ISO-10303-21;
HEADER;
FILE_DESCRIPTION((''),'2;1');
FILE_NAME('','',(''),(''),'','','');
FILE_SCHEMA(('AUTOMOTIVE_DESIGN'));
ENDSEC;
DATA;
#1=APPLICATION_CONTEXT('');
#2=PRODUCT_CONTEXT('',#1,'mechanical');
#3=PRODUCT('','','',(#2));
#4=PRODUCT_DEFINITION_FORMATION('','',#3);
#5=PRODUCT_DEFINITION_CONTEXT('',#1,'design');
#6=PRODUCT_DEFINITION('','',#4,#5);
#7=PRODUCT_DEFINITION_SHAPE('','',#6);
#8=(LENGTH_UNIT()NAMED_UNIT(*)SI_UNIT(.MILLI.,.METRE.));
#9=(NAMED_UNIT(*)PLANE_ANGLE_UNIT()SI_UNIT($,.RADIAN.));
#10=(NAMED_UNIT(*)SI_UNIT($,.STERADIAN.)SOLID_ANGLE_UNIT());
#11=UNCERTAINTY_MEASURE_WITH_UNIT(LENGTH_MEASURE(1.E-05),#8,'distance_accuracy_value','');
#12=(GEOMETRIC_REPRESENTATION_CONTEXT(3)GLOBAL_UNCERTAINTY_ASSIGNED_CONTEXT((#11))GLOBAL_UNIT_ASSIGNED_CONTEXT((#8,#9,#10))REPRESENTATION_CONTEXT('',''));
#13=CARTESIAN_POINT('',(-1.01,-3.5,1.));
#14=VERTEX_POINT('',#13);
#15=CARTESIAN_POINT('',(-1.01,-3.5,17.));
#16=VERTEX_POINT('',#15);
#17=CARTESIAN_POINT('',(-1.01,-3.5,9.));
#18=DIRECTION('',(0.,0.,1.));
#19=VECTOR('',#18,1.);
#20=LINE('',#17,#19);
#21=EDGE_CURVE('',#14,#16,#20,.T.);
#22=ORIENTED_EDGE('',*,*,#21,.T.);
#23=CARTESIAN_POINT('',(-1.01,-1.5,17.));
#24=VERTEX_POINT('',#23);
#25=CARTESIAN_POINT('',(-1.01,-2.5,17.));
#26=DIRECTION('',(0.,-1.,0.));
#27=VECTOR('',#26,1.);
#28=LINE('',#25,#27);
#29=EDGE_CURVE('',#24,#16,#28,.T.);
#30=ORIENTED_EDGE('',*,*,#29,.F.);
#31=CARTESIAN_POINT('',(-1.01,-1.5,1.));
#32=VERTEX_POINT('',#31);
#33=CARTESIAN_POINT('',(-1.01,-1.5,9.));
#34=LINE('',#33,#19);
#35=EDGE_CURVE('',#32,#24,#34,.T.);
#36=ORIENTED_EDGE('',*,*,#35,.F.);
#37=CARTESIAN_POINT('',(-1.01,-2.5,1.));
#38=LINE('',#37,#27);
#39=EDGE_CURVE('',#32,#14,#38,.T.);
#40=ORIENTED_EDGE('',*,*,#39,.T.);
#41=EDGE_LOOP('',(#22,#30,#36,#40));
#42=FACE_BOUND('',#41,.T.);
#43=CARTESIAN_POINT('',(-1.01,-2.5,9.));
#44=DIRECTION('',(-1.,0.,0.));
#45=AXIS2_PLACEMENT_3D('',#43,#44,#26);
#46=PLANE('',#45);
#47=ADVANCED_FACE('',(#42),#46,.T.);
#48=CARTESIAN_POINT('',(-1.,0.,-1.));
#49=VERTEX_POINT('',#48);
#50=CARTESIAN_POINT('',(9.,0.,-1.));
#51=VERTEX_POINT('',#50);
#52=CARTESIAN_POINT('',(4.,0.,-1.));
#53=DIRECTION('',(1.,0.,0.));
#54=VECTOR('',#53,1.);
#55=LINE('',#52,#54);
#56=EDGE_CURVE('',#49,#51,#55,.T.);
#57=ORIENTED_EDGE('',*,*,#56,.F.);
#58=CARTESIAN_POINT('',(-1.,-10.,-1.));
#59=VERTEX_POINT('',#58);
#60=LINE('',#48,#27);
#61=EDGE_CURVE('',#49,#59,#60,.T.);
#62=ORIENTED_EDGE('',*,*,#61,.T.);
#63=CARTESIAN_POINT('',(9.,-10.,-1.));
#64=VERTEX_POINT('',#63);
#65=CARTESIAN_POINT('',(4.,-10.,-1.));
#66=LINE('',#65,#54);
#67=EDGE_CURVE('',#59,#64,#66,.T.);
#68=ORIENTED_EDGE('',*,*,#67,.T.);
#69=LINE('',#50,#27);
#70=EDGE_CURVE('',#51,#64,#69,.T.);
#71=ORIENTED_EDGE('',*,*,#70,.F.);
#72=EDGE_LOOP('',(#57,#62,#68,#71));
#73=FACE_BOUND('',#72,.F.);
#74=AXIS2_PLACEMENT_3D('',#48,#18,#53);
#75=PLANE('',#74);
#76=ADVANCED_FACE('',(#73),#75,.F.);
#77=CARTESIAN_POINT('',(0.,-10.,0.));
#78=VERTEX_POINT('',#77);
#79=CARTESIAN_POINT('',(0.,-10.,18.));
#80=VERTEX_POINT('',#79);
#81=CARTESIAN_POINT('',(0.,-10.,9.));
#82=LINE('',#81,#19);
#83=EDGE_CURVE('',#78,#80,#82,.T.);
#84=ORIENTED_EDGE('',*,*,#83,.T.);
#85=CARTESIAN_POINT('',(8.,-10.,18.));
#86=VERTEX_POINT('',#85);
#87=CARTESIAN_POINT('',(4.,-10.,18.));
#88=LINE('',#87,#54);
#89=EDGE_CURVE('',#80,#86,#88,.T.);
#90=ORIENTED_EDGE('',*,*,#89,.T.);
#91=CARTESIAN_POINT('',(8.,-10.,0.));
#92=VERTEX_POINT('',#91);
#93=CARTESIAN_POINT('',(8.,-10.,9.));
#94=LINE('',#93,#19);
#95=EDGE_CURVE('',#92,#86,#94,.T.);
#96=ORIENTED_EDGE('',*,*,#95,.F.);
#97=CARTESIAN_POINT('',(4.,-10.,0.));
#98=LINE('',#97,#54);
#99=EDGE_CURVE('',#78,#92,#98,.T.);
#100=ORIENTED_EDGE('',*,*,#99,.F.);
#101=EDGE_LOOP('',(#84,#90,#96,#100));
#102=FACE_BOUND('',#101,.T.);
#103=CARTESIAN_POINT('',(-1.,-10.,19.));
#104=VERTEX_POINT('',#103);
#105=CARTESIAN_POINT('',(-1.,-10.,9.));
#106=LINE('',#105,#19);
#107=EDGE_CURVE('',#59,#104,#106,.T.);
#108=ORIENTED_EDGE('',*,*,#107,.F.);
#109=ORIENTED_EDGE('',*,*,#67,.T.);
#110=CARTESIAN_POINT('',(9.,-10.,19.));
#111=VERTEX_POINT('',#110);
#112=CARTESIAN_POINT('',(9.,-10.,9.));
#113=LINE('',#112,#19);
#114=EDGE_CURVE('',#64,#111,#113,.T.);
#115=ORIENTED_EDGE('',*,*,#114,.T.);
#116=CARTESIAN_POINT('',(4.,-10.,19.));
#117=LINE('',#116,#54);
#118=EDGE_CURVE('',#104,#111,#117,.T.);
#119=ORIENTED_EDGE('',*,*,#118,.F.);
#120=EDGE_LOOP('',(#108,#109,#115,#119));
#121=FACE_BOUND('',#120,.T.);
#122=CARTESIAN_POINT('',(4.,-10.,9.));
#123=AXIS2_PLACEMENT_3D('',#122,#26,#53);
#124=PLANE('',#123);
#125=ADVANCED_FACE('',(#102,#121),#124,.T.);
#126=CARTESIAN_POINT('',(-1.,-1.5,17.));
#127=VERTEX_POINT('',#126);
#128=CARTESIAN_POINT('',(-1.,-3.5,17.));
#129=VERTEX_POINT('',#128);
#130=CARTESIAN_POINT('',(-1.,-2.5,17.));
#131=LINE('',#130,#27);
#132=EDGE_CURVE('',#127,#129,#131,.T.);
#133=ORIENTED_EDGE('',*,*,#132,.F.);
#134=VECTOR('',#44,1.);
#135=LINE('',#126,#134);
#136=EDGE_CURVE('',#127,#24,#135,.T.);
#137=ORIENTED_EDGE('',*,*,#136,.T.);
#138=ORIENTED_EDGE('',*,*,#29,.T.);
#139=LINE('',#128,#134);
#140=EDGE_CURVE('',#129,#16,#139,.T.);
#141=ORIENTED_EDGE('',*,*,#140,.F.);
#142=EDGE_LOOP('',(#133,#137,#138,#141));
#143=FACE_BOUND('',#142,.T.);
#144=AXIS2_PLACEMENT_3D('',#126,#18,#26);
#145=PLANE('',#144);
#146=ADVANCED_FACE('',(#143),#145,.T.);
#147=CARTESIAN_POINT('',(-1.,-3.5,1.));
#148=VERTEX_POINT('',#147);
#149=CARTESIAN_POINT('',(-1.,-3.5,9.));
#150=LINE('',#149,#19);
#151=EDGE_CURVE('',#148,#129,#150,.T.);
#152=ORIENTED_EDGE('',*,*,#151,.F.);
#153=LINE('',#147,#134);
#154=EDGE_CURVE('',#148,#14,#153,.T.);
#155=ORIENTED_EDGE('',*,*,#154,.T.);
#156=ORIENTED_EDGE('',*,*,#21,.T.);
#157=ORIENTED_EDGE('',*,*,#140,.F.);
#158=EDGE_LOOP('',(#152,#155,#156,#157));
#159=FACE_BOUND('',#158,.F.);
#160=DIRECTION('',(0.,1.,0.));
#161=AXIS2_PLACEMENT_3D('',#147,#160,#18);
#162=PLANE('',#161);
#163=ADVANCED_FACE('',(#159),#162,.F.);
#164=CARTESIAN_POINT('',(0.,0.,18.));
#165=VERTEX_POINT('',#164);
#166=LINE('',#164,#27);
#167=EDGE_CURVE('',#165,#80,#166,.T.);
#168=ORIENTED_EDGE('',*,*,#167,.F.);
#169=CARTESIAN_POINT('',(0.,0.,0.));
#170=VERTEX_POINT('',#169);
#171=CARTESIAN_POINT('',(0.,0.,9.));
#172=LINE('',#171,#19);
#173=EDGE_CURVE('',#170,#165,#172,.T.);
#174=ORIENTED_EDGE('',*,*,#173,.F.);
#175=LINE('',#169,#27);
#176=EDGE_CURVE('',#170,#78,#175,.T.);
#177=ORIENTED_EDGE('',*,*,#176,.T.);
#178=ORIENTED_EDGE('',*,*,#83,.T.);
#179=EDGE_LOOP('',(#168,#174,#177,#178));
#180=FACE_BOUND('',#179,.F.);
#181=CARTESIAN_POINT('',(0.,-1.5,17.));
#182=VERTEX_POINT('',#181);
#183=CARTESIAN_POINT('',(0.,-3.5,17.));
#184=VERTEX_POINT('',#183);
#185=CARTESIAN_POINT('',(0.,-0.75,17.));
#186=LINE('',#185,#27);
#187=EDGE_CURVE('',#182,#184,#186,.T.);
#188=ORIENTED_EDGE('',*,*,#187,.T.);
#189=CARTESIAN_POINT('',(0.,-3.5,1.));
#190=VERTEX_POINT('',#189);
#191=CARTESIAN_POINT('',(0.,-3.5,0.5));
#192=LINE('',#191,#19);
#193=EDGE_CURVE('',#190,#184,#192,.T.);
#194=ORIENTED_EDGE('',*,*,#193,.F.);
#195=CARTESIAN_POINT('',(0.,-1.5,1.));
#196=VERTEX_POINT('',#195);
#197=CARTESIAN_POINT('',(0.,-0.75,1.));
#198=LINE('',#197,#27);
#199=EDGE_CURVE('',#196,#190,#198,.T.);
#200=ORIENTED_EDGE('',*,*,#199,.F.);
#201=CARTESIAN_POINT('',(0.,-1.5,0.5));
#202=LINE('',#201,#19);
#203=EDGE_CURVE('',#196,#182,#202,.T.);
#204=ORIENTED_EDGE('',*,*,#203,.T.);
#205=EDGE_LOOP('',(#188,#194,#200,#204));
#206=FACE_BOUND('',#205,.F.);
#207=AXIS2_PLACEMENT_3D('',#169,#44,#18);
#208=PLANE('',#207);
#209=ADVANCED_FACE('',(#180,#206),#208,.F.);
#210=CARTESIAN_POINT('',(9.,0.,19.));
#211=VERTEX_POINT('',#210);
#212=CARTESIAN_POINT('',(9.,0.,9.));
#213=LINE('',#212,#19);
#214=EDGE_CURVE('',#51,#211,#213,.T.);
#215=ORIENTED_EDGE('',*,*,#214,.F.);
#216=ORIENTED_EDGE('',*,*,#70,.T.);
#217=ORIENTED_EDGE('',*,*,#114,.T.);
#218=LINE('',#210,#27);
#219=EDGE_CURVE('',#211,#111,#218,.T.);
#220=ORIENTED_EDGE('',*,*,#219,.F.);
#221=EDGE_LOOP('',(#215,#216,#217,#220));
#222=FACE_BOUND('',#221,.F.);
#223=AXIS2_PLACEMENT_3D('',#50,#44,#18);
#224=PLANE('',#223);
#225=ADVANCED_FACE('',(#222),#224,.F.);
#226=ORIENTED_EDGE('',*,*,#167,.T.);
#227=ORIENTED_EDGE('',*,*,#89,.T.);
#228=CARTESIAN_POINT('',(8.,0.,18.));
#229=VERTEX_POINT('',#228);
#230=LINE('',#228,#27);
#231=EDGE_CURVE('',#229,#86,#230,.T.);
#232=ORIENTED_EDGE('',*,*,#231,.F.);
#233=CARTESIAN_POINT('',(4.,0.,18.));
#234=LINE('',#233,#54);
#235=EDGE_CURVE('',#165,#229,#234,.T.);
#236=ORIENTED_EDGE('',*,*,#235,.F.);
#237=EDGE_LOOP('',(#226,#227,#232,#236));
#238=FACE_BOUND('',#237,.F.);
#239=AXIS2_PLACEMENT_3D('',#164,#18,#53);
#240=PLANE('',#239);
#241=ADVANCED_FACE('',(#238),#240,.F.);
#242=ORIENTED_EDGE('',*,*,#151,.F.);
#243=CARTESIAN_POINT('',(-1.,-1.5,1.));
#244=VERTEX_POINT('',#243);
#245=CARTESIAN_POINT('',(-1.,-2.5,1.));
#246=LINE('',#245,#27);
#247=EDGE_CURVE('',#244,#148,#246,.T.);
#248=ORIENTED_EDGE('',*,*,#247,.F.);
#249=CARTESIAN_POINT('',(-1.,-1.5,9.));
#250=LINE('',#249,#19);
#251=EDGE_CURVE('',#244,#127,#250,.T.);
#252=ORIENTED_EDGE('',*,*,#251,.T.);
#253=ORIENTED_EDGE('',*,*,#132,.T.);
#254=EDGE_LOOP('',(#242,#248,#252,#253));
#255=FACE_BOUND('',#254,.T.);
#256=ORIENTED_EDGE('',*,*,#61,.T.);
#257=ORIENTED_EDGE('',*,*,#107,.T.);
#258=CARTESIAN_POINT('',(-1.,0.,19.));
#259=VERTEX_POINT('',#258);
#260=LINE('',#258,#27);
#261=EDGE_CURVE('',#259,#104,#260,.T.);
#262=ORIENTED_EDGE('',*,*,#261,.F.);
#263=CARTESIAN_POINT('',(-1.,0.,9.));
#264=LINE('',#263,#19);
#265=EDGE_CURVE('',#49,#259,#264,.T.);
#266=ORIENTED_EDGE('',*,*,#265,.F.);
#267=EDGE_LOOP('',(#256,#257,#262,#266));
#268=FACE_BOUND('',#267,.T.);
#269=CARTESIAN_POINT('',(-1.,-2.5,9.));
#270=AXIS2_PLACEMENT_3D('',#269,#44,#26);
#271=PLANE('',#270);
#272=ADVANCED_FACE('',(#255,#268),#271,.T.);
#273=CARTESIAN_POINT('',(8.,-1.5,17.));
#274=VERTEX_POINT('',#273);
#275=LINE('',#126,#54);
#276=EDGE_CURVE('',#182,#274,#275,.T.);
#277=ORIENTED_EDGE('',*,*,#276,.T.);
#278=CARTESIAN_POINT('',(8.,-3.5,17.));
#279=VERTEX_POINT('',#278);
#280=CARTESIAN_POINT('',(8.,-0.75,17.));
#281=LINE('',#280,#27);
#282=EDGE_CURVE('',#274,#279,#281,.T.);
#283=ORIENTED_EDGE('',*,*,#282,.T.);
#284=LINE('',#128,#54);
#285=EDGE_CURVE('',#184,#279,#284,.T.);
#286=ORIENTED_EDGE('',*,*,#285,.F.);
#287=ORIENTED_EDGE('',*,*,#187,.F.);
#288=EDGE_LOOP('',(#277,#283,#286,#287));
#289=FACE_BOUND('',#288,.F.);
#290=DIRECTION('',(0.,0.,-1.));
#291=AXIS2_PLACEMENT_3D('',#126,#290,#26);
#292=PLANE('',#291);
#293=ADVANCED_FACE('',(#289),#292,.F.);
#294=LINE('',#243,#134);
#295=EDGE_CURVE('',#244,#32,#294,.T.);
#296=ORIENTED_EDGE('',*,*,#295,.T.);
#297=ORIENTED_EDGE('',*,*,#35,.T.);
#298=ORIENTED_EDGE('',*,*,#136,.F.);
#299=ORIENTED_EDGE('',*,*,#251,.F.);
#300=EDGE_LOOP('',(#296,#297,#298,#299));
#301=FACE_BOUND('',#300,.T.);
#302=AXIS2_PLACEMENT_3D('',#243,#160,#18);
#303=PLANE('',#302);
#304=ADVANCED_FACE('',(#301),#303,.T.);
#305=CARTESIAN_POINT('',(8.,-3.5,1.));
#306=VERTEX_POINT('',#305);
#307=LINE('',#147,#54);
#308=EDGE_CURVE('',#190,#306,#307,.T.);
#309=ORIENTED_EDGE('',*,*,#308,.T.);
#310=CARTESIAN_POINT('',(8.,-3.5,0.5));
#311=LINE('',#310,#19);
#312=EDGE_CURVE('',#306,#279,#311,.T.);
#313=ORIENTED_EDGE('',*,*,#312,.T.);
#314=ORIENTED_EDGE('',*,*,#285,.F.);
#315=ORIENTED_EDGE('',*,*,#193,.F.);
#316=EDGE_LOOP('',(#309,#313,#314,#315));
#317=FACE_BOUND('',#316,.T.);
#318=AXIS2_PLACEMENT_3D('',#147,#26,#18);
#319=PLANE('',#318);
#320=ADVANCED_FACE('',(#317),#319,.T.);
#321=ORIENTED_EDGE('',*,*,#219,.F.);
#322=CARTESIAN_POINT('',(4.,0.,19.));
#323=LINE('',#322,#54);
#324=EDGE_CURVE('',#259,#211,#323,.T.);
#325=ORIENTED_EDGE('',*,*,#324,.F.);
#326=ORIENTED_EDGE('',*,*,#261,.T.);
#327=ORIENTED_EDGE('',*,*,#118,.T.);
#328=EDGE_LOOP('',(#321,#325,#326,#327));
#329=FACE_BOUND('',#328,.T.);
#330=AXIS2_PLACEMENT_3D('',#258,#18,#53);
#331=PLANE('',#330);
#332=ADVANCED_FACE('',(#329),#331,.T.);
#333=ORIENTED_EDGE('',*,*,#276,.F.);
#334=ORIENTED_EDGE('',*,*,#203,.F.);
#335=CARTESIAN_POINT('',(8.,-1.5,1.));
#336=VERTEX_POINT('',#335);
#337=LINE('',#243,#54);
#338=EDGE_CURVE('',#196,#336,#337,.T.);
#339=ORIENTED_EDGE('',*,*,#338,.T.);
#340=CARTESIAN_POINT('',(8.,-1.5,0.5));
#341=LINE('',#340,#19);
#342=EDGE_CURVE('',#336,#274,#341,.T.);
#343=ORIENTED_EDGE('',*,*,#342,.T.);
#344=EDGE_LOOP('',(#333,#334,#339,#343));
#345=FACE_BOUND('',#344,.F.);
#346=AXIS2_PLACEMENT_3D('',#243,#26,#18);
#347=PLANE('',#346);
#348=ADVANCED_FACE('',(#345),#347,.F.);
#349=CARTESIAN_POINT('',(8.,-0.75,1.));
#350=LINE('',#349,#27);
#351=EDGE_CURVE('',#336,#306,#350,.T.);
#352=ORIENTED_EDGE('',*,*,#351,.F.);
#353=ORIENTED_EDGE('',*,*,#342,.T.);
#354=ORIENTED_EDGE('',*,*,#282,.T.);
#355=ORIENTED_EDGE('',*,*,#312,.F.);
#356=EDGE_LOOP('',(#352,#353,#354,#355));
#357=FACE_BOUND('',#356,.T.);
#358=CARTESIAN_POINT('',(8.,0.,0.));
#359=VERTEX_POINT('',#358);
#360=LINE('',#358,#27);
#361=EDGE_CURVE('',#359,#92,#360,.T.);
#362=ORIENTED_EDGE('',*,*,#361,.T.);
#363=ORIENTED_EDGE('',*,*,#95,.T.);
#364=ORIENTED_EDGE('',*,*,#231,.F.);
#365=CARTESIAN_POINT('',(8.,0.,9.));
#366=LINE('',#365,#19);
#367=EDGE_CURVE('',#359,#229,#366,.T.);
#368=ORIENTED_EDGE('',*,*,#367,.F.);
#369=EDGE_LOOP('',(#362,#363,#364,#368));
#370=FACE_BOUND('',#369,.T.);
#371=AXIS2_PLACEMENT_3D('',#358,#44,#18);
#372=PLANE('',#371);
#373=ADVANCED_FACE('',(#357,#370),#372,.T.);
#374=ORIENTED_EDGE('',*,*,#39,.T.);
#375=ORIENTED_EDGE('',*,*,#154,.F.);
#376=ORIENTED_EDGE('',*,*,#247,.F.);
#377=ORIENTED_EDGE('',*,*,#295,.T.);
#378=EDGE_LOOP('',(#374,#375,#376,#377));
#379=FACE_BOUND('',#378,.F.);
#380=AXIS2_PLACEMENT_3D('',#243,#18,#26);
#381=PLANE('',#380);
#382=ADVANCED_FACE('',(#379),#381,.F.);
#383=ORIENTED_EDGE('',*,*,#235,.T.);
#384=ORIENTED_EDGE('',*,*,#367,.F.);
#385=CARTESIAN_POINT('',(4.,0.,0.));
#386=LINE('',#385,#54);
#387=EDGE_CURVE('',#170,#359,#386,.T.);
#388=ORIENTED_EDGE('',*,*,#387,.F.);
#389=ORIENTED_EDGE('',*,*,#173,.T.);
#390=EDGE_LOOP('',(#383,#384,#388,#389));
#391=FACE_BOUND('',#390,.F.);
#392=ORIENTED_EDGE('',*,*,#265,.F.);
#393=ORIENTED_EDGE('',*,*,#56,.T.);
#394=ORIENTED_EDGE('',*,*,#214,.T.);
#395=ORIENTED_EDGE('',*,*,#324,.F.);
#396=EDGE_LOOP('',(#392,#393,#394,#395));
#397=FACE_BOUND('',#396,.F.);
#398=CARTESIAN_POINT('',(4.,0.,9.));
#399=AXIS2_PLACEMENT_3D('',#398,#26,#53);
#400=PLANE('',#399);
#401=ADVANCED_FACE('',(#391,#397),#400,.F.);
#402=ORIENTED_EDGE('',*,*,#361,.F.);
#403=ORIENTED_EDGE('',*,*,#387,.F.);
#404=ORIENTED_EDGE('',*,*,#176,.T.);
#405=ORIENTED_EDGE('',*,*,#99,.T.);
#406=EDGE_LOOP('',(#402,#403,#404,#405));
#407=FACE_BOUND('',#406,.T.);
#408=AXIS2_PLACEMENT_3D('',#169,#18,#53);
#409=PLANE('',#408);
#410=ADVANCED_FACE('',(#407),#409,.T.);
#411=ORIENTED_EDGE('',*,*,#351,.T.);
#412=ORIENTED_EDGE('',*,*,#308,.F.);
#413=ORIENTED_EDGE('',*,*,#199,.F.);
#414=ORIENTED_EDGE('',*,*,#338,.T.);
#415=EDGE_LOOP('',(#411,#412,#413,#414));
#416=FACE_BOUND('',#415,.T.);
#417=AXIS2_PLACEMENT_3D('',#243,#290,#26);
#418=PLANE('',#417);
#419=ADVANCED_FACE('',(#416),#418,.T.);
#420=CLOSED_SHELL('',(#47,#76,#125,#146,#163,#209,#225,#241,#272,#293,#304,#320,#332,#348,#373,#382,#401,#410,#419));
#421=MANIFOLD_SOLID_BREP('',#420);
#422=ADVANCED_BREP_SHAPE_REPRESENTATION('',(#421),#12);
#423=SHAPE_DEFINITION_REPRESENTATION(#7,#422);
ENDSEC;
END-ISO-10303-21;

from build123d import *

# Parameters (mm, degrees)
F0_W          = 10
F0_H          = 20
F0_W_2        = 8
F0_H_2        = 18
F1_DEPTH      = 10
F2_W          = 2
F2_H          = 16
F3_DEPTH      = 10
F3_DEPTH_BACK = 0.01


with BuildPart() as f1:
    # F0 (on Front) → F1 (new body)
    with BuildSketch(Plane.XZ):
        with Locations((4, 9)):
            Rectangle(F0_W, F0_H)
        with Locations((4, 9)):
            Rectangle(F0_W_2, F0_H_2, mode=Mode.SUBTRACT)
    extrude(amount=F1_DEPTH)

    # F2 (on face) → F3 (join, two sides)
    with BuildSketch(Plane(origin=(-1, 0, 0), x_dir=(0, -1, 0), z_dir=(-1, 0, 0))) as f3_sk:
        with Locations((2.5, 9)):
            Rectangle(F2_W, F2_H)
    extrude(amount=-F3_DEPTH)
    extrude(f3_sk.sketch, amount=F3_DEPTH_BACK)


solid = f1.part
